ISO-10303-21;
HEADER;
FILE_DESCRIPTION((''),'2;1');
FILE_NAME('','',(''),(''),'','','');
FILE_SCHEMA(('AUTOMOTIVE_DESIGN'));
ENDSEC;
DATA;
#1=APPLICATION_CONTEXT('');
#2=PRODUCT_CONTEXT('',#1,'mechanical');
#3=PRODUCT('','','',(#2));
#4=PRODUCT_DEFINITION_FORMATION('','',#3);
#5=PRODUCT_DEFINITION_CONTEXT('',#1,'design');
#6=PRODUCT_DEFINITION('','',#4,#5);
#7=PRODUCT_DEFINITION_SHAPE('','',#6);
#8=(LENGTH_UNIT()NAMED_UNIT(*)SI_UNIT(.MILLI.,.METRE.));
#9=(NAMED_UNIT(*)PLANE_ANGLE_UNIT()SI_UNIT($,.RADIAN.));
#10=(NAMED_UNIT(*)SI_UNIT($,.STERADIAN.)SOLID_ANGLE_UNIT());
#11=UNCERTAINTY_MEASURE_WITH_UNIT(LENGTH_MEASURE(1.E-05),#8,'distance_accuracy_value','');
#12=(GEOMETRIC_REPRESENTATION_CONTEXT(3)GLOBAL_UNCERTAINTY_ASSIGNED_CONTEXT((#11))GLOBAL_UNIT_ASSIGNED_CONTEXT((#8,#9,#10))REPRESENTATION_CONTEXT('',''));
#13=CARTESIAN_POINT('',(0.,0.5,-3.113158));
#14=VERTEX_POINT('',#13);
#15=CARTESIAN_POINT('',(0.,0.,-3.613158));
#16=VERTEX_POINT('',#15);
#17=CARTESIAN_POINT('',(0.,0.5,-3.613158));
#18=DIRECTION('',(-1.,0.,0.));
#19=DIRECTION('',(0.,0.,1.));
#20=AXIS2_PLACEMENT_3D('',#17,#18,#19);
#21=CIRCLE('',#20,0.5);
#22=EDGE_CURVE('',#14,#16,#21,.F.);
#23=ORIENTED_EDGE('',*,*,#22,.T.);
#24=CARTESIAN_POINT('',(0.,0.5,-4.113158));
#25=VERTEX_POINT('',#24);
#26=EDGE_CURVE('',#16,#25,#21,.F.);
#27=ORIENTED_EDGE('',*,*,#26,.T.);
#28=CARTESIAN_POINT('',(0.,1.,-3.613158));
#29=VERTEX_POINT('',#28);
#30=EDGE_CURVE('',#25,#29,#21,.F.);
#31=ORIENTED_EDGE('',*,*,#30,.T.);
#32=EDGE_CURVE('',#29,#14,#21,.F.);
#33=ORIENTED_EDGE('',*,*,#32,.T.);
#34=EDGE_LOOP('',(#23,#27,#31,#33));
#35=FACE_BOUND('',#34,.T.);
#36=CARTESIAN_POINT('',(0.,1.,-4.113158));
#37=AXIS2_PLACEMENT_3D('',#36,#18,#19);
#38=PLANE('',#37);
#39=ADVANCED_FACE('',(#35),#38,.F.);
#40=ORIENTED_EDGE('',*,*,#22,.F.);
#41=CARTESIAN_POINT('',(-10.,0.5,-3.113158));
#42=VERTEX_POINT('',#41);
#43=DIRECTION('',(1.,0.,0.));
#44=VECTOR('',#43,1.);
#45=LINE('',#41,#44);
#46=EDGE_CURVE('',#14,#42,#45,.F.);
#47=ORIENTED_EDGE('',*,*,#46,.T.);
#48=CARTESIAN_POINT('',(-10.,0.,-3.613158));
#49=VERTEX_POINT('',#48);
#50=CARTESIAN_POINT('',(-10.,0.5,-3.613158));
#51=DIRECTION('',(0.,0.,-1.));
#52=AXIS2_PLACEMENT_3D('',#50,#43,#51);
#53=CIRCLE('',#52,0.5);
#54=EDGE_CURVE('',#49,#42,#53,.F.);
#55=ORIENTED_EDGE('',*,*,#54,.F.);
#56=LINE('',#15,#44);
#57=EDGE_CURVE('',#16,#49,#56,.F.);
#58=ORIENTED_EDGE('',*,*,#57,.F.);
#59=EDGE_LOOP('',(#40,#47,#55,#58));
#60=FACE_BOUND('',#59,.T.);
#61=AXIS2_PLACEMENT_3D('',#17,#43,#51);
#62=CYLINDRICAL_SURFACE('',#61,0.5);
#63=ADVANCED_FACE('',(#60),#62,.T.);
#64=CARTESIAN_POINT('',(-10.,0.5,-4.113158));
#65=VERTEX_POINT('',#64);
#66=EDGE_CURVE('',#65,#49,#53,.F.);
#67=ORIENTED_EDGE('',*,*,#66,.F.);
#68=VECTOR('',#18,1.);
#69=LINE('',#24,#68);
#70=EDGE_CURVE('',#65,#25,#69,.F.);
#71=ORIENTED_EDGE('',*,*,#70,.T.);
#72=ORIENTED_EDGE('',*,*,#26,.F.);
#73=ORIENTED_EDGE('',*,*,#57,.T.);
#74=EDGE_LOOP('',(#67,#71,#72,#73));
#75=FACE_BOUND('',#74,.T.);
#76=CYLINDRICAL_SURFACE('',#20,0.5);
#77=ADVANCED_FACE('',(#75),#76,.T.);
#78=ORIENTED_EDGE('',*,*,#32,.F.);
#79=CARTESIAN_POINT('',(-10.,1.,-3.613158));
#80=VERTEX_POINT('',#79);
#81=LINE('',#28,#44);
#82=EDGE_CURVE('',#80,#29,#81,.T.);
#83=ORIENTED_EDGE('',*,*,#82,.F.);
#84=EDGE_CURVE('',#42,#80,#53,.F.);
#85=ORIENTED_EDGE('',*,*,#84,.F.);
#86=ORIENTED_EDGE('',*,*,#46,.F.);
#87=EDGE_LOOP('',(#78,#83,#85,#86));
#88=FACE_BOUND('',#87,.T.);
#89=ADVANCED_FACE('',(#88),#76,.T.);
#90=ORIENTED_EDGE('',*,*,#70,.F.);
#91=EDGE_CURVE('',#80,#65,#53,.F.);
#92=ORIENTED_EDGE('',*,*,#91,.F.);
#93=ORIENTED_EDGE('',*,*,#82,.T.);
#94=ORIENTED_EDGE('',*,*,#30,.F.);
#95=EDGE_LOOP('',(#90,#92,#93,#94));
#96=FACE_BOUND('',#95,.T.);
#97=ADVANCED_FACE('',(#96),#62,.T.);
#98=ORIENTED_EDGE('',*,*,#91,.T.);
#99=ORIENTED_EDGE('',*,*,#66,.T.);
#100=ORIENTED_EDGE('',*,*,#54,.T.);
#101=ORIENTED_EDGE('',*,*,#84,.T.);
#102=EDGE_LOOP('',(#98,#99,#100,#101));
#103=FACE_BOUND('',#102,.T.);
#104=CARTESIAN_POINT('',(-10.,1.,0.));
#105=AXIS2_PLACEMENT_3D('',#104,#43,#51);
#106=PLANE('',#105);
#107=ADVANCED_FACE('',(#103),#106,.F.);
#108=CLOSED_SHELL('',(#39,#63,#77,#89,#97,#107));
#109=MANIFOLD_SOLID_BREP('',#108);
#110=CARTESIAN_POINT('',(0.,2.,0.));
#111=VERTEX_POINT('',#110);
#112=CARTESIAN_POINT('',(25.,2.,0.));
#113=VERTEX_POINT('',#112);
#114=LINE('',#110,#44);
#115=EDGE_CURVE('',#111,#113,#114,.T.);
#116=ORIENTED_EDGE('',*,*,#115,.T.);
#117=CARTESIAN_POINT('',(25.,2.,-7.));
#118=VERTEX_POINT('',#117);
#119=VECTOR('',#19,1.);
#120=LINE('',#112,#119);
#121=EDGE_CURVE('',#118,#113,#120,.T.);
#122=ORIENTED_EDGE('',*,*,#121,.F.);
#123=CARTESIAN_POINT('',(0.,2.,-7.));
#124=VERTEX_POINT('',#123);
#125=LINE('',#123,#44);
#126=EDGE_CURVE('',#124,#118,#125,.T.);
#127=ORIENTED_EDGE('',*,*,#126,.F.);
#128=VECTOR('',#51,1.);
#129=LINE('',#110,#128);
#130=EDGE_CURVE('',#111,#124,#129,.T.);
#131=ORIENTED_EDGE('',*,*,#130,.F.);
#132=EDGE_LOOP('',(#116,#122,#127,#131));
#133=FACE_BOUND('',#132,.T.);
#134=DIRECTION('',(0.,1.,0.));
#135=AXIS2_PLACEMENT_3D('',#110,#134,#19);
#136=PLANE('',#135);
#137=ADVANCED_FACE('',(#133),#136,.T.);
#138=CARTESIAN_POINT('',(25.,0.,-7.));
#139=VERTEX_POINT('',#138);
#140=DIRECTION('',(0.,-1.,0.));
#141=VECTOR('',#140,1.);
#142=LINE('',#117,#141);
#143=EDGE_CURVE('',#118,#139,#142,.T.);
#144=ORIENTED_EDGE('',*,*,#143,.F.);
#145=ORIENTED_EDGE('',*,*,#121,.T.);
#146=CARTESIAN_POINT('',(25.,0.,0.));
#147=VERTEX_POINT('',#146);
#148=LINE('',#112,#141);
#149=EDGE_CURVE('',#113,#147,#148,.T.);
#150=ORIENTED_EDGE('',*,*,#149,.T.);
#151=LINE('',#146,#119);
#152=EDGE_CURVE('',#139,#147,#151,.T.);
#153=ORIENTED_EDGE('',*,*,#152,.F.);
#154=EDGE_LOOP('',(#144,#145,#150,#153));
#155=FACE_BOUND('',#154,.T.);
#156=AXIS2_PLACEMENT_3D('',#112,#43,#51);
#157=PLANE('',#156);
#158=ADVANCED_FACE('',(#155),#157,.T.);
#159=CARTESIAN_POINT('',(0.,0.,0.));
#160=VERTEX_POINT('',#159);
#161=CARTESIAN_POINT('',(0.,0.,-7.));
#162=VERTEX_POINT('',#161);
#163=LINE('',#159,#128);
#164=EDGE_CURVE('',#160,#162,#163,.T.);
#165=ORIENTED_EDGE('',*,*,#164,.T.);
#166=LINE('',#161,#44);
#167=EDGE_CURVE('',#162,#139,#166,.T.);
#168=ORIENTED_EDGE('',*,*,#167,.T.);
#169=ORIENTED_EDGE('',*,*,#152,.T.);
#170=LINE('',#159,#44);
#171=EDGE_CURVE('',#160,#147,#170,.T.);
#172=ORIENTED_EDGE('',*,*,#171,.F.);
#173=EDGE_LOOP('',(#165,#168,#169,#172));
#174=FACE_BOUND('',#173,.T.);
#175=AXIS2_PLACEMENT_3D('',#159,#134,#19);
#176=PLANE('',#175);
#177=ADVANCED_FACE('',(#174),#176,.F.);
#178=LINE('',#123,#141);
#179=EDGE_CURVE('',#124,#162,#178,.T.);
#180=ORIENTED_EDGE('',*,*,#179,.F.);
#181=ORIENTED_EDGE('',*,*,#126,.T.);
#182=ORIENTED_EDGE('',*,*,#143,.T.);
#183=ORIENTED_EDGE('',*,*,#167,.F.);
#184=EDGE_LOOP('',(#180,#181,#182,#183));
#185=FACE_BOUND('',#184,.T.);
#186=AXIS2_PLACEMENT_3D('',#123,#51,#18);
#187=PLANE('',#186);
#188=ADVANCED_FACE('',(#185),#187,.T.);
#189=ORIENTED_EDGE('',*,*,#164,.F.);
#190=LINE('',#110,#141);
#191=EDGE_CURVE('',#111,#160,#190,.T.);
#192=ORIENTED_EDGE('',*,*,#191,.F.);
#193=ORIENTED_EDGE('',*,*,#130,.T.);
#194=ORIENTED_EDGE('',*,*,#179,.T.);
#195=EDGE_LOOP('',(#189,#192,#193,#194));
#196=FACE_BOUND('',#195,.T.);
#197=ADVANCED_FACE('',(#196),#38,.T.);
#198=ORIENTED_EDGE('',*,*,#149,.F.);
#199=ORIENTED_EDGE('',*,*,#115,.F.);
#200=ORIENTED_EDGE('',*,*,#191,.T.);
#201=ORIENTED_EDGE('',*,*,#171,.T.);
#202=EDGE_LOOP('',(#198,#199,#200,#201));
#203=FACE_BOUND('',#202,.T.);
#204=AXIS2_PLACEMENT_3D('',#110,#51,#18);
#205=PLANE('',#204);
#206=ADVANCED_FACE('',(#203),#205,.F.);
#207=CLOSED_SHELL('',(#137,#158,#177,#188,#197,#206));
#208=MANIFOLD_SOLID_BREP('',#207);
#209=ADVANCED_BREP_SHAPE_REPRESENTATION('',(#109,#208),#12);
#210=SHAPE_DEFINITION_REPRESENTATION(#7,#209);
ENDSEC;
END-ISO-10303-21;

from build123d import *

# Parameters (mm, degrees)
BOSS_EXTRUDE1_DEPTH = 2
SKETCH1_3_W         = 10
SKETCH1_3_H         = 1
BOSS_EXTRUDE2_DEPTH = 1
FILLET1_R           = 0.5


# Read off the part's stored shape, not the designer's step: Split1
with BuildPart() as part:
    # Sketch1 → Boss-Extrude1 (new body)
    with BuildSketch(Plane(origin=(0, 0, 0), x_dir=(1, 0, 0), z_dir=(0, 1, 0))):
        Polygon((25, 0), (25, 7), (0, 7), (0, 4.113157824), (0, 3.113157824), (0, 0), align=None)
    extrude(amount=BOSS_EXTRUDE1_DEPTH)

    # Sketch1<3> → Boss-Extrude2 (add)
    with BuildSketch(Plane(origin=(0, 0, 0), x_dir=(1, 0, 0), z_dir=(0, 1, 0))):
        with Locations((-5, 3.613157824)):
            Rectangle(SKETCH1_3_W, SKETCH1_3_H)
    extrude(amount=BOSS_EXTRUDE2_DEPTH)


with BuildPart() as body_2:
    # Split1: the piece on the far side of the plane
    add(part.part)
    split(bisect_by=Plane.YZ, keep=Keep.BOTTOM)

    # Fillet1
    # the kernel refuses this fillet: 0.5 mm, written as the material it takes off along each edge
    with BuildSketch(Plane(origin=(1.25, 0, -4.113157824), x_dir=(0, 0, 1), z_dir=(-1, 0, 0)), Plane(origin=(1.25, 1, -4.113157824), x_dir=(0, -1, 0), z_dir=(-1, 0, 0)), Plane(origin=(-11.25, 0, -3.113157824), x_dir=(0, 0, -1), z_dir=(1, 0, 0)), Plane(origin=(-11.25, 1, -3.113157824), x_dir=(0, -1, 0), z_dir=(1, 0, 0))) as fillet1_piece_1:
        with BuildLine():
            CenterArc((FILLET1_R, FILLET1_R), FILLET1_R, 180, 90)
            Line((0, FILLET1_R), (0, 0))
            Line((0, 0), (FILLET1_R, 0))
        make_face()
    extrude(amount=12.5, mode=Mode.SUBTRACT)


with BuildPart() as part_1:
    add(part.part)

    # Split1
    split(bisect_by=Plane.YZ, keep=Keep.TOP)


solid = Compound([body_2.part, part_1.part])
